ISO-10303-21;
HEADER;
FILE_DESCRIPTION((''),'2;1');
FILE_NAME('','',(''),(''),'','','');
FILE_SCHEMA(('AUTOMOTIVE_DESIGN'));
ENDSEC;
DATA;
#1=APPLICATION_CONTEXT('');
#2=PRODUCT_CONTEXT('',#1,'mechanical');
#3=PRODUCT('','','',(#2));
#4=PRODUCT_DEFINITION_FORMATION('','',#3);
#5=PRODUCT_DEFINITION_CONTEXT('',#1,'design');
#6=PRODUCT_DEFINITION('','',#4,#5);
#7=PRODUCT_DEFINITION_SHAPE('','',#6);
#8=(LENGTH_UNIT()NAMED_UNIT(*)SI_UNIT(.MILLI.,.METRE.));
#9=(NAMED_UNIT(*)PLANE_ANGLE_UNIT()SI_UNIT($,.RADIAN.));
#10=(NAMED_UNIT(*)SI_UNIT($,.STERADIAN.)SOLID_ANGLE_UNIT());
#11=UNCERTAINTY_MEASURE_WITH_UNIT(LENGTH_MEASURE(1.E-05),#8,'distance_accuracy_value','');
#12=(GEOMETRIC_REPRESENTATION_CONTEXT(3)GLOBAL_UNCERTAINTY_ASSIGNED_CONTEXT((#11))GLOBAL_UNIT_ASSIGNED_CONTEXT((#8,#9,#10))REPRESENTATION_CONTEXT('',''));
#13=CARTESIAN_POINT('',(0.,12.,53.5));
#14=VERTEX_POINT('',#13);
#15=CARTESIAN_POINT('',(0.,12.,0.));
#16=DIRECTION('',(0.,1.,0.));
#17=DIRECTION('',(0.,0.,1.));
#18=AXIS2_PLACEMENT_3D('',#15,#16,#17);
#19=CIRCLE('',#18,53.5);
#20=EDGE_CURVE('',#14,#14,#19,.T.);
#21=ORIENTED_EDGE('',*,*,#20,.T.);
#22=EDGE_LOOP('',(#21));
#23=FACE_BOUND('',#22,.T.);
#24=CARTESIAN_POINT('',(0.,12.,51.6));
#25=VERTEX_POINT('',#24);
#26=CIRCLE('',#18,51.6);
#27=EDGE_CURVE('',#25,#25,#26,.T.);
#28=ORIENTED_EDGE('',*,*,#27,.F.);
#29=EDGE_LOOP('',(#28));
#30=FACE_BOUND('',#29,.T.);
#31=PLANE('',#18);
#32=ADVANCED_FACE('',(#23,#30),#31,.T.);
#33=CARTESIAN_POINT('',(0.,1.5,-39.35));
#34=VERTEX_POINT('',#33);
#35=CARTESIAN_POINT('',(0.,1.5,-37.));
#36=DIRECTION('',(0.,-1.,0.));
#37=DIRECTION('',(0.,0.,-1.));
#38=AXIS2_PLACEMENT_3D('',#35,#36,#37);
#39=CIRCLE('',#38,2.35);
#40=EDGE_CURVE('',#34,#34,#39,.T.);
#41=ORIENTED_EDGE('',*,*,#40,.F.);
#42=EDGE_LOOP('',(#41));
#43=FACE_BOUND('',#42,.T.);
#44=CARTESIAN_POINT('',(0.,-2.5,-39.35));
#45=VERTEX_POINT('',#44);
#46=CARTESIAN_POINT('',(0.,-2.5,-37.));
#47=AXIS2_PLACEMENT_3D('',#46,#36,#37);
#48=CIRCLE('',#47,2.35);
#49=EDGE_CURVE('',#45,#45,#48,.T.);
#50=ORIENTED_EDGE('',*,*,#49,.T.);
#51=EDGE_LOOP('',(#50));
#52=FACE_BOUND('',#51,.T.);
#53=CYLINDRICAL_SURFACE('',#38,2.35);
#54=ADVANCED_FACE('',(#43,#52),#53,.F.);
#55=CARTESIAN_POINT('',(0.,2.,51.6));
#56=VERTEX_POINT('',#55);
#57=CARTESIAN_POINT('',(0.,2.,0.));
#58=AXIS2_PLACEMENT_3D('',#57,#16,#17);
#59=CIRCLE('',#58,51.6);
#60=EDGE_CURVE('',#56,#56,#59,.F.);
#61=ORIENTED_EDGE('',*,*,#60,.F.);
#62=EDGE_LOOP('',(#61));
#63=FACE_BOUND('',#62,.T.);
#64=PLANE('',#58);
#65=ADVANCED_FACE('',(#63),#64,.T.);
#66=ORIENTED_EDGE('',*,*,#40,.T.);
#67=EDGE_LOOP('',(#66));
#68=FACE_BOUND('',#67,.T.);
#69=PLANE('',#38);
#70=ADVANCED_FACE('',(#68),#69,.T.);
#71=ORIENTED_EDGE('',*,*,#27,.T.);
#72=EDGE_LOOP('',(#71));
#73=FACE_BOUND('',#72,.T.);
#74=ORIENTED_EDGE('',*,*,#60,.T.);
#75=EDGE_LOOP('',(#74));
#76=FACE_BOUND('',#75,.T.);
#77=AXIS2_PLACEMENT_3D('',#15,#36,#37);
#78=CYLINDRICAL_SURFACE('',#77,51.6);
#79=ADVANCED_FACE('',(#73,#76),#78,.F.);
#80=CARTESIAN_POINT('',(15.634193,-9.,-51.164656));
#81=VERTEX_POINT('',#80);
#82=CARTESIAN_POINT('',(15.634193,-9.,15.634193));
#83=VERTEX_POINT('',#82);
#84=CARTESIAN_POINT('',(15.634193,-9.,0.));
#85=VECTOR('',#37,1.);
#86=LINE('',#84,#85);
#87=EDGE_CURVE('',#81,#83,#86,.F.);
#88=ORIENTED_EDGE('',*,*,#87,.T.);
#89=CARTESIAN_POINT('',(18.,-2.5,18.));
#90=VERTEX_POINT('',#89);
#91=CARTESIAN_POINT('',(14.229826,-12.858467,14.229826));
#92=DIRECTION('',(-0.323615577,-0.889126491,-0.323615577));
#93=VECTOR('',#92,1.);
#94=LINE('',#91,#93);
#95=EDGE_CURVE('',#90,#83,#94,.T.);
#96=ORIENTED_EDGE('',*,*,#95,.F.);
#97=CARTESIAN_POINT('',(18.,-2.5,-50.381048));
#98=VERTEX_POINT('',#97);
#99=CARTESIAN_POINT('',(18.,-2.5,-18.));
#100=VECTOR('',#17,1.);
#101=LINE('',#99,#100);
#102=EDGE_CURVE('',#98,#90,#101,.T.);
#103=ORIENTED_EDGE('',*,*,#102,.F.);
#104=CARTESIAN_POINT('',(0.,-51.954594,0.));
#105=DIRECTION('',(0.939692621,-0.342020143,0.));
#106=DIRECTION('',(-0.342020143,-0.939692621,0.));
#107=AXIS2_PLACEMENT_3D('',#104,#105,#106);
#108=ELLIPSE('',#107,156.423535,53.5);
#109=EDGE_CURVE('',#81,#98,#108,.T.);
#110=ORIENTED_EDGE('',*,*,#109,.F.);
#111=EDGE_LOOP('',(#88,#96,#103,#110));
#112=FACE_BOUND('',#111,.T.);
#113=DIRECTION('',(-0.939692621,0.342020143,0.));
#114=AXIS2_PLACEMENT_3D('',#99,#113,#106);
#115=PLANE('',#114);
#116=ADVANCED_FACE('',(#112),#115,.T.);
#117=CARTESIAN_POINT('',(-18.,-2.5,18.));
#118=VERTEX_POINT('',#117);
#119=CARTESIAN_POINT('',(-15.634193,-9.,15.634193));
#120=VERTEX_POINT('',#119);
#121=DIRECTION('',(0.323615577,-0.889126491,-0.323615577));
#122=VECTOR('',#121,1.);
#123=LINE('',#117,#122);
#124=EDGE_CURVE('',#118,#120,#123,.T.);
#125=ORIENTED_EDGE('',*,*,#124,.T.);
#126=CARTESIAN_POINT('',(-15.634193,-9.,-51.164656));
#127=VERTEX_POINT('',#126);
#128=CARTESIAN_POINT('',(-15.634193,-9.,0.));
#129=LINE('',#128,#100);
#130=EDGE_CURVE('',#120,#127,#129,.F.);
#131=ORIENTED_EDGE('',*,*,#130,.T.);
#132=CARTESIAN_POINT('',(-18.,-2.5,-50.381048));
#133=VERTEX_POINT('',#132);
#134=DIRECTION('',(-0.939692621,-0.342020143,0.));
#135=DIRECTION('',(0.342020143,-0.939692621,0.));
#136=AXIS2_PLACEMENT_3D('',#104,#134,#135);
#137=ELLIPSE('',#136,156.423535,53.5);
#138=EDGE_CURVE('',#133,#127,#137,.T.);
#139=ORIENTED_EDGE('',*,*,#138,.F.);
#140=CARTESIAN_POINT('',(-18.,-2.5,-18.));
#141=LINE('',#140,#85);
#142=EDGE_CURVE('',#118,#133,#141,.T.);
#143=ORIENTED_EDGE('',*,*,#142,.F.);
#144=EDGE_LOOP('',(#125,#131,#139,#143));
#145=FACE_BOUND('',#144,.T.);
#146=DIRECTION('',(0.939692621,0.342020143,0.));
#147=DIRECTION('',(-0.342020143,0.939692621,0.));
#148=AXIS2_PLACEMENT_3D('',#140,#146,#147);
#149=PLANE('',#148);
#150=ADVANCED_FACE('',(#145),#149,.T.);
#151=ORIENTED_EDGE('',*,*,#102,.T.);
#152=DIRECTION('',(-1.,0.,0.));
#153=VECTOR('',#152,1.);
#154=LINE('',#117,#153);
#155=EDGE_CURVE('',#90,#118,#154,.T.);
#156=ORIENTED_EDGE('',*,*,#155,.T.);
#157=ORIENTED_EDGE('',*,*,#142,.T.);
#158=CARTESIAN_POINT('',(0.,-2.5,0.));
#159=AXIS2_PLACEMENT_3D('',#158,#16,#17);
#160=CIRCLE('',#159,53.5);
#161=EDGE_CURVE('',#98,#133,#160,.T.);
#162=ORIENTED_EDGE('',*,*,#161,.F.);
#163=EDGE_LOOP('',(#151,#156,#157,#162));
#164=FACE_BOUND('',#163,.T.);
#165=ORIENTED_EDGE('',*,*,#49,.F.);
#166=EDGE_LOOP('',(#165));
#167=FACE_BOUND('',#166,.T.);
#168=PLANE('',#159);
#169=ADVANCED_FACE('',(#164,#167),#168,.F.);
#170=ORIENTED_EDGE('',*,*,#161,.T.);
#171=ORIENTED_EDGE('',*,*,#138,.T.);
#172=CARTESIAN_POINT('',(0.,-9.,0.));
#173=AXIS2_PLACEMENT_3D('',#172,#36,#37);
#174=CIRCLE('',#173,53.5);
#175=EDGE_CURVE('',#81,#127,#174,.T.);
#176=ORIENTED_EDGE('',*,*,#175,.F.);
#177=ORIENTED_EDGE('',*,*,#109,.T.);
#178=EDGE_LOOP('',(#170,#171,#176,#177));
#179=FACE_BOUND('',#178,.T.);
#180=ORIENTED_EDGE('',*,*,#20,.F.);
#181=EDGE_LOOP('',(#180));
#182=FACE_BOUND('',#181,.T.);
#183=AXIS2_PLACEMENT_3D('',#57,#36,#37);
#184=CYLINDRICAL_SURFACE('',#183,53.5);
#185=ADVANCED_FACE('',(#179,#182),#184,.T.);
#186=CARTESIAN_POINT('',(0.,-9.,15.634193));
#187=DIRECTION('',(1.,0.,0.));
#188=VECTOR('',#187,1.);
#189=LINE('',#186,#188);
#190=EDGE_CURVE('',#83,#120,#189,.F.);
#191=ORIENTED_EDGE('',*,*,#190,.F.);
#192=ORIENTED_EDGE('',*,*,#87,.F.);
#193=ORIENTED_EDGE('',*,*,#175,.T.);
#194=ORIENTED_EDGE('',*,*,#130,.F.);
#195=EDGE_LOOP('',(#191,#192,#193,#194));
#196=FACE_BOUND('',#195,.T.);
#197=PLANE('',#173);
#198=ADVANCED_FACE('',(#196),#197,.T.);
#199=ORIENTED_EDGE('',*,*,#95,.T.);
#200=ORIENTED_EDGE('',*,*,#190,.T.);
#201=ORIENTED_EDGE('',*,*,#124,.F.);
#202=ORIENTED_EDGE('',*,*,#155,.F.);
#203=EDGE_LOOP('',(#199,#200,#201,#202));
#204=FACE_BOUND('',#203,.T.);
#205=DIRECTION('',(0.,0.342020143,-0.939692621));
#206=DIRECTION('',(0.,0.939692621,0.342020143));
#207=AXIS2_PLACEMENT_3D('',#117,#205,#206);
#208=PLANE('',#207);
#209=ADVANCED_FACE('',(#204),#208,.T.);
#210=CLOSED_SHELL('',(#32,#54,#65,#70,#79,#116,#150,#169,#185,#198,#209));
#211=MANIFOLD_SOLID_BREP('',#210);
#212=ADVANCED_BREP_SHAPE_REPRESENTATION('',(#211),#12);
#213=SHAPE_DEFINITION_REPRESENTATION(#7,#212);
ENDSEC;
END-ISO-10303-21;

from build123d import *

# Parameters (mm, degrees)
SKETCH1_R           = 53.5
BOSS_EXTRUDE1_DEPTH = 2
SKETCH2_R           = 53.5
SKETCH2_R_2         = 51.6
BOSS_EXTRUDE2_DEPTH = 10
BOSS_EXTRUDE3_START = 9
SKETCH4_R           = 53.5
BOSS_EXTRUDE3_DEPTH = 9
SKETCH6_W           = 36
SKETCH6_H           = 36
CUT_EXTRUDE1_DEPTH  = 6.5
DRAFT4_START        = -19
DRAFT4_DEPTH        = 37
DRAFT4_2_DEPTH      = 38
CUT_EXTRUDE2_DEPTH  = 40.5
SKETCH14_R          = 2.35
CUT_EXTRUDE3_DEPTH  = 4


with BuildPart() as part:
    # Sketch1 → Boss-Extrude1 (new body)
    with BuildSketch(Plane(origin=(0, 0, 0), x_dir=(1, 0, 0), z_dir=(0, 1, 0))):
        with Locations(Location((0, 0, 0), (0, 0, 270))):
            Circle(SKETCH1_R)
    extrude(amount=BOSS_EXTRUDE1_DEPTH)

    # Sketch2 → Boss-Extrude2 (add)
    with BuildSketch(Plane(origin=(0, 2, 0), x_dir=(1, 0, 0), z_dir=(0, 1, 0))):
        with Locations(Location((0, 0, 0), (0, 0, 270))):
            Circle(SKETCH2_R)
        with Locations(Location((0, 0, 0), (0, 0, 270))):
            Circle(SKETCH2_R_2, mode=Mode.SUBTRACT)
    extrude(amount=BOSS_EXTRUDE2_DEPTH)

    # Sketch4 → Boss-Extrude3 (add)
    with BuildSketch(Plane.XZ.offset(BOSS_EXTRUDE3_START)):
        with Locations(Location((0, 0, 0), (0, 0, 270))):
            Circle(SKETCH4_R)
    extrude(amount=-BOSS_EXTRUDE3_DEPTH)

    # Sketch6 → Cut-Extrude1 (cut)
    with BuildSketch(Plane.XZ.offset(9)):
        Rectangle(SKETCH6_W, SKETCH6_H)
    extrude(amount=-CUT_EXTRUDE1_DEPTH, mode=Mode.SUBTRACT)

    # Draft4: read off the stored shape, not the designer's step
    # Draft4 outline → Draft4 (add)
    with BuildSketch(Plane.XY.offset(DRAFT4_START)):
        Polygon((18, -9), (18, -2.5), (15.634193477, -9), align=None)
        Polygon((-18, -9), (-15.634193477, -9), (-18, -2.5), align=None)
    extrude(amount=DRAFT4_DEPTH)

    # Draft4 2 outline → Draft4 2 (add)
    with BuildSketch(Plane.YZ.offset(DRAFT4_START)):
        Polygon((-9, 18), (-9, 15.634193477), (-2.5, 18), align=None)
    extrude(amount=DRAFT4_2_DEPTH)

    # Sketch13 → Cut-Extrude2 (cut)
    with BuildSketch(Plane.XY.offset(-18)):
        Polygon((15.634193477, -9), (-15.634193477, -9), (-18, -2.5), (18, -2.5), align=None)
    extrude(amount=-CUT_EXTRUDE2_DEPTH, mode=Mode.SUBTRACT)

    # Sketch14 → Cut-Extrude3 (cut)
    with BuildSketch(Plane.XZ.offset(2.5)):
        with Locations(Location((0, -37, 0), (0, 0, 270))):
            Circle(SKETCH14_R)
    extrude(amount=-CUT_EXTRUDE3_DEPTH, mode=Mode.SUBTRACT)


solid = part.part
